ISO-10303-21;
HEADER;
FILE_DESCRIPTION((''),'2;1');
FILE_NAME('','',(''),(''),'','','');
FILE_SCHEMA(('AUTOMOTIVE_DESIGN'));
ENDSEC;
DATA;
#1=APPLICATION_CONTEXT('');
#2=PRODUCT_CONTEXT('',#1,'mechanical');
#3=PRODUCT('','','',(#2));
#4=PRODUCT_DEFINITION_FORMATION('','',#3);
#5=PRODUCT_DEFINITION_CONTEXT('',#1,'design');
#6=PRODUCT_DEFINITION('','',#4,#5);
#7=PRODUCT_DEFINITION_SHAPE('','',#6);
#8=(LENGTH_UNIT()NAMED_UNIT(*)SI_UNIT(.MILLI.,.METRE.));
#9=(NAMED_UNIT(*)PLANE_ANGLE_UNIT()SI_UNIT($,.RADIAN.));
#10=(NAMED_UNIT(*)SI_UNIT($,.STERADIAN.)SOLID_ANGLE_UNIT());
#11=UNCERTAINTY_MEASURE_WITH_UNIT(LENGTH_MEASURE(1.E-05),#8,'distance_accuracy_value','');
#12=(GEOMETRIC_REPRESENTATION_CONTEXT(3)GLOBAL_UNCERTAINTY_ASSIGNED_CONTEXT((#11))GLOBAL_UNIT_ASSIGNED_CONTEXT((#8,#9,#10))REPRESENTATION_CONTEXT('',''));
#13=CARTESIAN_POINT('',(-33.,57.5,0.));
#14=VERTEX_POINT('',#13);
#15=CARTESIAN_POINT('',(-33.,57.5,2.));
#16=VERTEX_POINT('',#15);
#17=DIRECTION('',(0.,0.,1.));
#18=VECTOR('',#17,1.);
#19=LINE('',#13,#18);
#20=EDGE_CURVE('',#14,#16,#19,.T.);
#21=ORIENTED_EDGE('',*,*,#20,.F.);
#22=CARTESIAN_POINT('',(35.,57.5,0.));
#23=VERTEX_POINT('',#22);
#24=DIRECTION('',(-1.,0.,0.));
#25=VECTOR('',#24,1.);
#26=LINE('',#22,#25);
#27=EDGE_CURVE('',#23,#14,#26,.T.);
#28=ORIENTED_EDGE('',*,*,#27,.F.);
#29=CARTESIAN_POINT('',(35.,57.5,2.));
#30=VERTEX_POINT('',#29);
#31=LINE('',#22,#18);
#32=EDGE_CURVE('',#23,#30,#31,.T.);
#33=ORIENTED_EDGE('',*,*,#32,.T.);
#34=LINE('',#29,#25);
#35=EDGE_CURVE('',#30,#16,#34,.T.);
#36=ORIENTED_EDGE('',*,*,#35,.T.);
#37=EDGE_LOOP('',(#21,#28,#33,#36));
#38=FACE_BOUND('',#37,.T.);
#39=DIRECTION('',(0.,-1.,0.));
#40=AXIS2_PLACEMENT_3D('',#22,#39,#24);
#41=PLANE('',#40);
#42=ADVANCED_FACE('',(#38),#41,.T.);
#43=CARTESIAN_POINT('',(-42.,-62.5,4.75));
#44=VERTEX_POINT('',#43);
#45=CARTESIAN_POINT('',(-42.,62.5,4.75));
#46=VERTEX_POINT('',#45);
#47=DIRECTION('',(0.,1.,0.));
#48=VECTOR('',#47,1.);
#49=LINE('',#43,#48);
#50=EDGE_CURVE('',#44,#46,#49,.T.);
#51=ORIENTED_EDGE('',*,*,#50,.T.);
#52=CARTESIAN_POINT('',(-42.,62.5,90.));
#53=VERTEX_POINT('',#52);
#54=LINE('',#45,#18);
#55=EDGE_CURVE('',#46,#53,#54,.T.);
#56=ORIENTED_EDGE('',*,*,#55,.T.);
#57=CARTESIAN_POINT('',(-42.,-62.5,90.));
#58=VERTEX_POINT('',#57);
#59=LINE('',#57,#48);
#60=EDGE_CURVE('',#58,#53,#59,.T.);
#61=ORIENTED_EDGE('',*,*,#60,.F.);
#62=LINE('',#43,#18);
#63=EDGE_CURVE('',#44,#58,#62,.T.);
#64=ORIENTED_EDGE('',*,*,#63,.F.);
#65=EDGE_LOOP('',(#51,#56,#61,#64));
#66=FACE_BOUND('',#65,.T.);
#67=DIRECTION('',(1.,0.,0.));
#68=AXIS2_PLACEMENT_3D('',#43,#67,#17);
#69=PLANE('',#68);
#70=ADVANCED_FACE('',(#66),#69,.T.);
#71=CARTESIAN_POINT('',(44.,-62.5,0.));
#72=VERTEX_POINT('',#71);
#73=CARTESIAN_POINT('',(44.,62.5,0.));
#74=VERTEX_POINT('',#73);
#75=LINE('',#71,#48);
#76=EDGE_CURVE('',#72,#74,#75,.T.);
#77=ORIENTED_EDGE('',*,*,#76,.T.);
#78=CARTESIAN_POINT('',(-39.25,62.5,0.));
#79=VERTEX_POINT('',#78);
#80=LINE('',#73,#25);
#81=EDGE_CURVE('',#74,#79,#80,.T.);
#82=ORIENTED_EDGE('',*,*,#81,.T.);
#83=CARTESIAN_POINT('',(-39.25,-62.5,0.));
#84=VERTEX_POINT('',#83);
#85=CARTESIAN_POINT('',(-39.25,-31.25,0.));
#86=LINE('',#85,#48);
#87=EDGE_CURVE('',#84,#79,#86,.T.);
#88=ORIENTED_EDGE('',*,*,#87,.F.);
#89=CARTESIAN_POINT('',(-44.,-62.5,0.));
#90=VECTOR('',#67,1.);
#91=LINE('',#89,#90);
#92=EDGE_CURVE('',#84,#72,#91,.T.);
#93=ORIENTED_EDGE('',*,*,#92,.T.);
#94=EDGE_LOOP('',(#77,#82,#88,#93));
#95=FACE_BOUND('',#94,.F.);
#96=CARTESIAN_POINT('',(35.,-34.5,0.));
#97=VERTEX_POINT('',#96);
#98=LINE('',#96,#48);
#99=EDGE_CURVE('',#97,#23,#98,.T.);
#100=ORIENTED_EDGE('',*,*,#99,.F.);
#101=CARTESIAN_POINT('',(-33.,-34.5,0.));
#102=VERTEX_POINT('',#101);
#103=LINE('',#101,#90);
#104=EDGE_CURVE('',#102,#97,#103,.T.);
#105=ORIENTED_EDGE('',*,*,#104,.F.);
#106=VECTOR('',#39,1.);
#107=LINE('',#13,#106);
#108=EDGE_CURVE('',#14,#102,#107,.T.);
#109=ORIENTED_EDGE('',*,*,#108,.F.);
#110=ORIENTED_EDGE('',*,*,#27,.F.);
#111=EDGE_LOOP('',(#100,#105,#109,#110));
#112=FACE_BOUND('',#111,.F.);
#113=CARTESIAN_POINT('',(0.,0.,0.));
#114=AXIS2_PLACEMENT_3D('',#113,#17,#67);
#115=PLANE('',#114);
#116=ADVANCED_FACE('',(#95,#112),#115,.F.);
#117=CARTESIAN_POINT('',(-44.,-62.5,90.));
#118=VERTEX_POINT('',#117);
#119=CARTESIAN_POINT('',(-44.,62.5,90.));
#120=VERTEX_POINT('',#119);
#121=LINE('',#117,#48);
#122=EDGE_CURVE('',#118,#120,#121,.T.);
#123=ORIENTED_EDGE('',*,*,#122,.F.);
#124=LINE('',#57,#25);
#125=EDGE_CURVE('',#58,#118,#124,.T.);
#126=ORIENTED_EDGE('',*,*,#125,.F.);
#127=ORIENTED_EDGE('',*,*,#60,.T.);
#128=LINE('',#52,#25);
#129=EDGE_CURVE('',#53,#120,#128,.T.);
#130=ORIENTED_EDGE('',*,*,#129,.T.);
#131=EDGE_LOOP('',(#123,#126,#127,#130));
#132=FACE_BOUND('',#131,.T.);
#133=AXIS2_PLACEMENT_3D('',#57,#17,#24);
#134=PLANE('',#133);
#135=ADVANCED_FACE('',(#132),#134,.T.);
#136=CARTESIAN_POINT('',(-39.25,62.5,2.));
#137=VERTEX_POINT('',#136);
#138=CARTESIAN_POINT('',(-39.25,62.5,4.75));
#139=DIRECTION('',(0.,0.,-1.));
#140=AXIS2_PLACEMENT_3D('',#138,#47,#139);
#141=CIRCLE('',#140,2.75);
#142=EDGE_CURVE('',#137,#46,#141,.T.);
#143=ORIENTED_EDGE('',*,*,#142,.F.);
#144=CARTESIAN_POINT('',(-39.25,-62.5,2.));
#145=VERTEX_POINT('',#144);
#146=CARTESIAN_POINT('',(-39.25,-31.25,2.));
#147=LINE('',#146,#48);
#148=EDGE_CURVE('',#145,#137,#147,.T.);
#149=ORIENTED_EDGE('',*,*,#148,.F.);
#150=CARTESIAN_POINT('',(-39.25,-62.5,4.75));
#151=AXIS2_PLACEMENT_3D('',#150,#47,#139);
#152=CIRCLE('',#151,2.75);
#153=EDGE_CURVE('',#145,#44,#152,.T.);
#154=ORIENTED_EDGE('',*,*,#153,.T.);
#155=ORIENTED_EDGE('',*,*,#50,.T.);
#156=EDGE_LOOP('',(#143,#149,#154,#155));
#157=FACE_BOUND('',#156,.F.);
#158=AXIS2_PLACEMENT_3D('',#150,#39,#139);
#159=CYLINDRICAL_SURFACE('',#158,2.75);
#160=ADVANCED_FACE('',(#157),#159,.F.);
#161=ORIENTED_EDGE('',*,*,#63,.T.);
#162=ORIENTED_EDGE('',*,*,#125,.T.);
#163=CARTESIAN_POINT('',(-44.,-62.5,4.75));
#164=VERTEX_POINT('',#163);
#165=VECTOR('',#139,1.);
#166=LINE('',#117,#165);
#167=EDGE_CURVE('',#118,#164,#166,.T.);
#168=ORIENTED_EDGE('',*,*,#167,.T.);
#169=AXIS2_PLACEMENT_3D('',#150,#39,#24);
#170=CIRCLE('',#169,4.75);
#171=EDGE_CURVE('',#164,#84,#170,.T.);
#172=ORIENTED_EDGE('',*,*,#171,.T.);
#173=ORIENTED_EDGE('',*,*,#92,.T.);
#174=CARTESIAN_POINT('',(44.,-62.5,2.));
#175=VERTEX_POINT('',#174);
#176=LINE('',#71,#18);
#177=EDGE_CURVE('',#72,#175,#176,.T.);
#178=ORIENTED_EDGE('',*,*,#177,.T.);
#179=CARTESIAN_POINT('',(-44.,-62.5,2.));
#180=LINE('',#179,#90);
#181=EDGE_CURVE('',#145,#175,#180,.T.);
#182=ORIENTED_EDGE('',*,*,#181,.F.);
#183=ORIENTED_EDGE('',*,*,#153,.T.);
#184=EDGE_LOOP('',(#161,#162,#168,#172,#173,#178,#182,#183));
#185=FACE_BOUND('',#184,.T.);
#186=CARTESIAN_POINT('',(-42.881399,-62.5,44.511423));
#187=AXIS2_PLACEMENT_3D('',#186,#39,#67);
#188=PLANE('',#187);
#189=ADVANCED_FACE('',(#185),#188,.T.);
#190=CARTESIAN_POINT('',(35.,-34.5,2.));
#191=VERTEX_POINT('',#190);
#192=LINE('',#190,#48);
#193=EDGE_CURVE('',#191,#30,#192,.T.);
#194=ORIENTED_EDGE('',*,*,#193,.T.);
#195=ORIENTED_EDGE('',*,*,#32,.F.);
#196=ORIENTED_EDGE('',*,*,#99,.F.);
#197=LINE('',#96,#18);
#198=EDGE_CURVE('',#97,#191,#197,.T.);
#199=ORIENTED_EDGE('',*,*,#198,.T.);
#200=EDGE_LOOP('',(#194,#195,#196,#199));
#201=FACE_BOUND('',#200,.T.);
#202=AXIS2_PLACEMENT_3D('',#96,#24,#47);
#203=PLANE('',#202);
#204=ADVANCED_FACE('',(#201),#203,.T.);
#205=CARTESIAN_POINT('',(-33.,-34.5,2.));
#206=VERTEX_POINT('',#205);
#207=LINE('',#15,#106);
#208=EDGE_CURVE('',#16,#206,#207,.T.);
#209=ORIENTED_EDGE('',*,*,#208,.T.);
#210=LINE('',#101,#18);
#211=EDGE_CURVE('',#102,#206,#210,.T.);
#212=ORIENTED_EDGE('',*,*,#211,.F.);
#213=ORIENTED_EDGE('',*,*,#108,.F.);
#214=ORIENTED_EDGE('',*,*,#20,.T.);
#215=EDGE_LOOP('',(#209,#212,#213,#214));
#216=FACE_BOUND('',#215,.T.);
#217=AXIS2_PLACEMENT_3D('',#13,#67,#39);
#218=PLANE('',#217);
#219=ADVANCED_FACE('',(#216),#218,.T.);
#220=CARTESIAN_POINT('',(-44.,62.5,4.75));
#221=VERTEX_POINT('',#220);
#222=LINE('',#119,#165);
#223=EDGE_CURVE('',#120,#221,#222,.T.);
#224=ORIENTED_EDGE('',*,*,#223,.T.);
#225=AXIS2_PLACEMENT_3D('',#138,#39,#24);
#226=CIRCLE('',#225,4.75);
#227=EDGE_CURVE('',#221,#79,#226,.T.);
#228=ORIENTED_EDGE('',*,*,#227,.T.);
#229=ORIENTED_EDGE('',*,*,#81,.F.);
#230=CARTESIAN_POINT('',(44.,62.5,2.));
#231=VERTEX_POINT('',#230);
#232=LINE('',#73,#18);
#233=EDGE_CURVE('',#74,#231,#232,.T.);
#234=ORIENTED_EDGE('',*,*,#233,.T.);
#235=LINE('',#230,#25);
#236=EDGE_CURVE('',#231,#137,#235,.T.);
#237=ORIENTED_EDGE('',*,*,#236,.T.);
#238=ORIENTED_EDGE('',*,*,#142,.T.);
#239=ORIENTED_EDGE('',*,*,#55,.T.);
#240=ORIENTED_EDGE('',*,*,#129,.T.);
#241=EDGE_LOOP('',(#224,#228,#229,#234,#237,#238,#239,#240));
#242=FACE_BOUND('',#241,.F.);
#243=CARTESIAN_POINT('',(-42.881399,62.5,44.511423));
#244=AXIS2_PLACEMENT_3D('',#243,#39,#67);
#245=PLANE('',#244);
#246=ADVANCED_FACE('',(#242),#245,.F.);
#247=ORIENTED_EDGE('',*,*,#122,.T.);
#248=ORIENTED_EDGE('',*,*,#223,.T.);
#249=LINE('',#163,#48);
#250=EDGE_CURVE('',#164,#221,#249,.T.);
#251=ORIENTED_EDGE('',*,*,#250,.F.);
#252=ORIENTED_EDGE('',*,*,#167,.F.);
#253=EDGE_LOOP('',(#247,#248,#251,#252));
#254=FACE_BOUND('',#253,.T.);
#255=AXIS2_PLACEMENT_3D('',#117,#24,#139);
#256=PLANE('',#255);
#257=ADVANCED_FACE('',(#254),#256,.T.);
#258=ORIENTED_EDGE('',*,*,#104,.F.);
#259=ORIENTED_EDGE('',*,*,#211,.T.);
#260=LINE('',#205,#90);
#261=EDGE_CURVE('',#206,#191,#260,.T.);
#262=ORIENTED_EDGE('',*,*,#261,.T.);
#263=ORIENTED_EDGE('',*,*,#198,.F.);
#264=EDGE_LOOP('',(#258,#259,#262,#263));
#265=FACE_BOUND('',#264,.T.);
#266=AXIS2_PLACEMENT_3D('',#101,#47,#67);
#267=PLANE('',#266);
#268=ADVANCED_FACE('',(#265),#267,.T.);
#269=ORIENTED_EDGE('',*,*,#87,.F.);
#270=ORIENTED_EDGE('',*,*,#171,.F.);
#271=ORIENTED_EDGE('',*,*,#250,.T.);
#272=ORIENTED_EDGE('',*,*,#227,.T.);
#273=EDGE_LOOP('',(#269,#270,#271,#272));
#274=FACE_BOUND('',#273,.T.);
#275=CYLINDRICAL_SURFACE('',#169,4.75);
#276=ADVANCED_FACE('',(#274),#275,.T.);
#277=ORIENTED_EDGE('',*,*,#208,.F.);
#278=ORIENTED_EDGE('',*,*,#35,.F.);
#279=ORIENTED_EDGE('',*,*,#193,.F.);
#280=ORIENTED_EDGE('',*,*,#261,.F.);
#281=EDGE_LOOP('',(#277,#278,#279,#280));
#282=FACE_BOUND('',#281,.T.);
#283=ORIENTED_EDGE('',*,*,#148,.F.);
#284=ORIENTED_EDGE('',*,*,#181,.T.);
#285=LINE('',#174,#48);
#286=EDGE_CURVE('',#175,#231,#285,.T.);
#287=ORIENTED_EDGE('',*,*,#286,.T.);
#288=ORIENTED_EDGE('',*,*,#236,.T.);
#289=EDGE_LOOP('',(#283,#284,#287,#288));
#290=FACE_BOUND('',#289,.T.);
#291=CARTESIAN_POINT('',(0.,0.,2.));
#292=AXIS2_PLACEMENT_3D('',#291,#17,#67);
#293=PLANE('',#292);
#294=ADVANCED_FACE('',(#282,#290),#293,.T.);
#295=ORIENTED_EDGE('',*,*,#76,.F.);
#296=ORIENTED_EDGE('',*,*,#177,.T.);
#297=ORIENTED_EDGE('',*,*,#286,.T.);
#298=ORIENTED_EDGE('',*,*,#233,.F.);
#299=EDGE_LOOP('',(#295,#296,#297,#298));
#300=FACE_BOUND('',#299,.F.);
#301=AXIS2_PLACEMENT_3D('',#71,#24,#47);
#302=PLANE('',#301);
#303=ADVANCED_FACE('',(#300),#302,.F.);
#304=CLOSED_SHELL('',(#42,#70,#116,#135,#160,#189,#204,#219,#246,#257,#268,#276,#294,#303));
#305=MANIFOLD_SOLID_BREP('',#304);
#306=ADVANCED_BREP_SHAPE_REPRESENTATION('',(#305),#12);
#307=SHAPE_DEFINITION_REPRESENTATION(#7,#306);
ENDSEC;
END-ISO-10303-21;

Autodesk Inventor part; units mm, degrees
ref_plane "YZ Plane" through (0, 0, 0) normal (1, 0, 0) x (0, 1, 0)
ref_plane "XZ Plane" through (0, 0, 0) normal (0, 1, 0) x (-1, 0, 0)
ref_plane "XY Plane" through (0, 0, 0) normal (0, 0, 1) x (1, 0, 0)
sketch "Sketch1" plane through (0, 0, 0) normal (0, 0, 1) x (1, 0, 0)
  line L0 (-44, -62.5) -> (44, -62.5)
  line L1 (44, -62.5) -> (44, 62.5)
  line L2 (44, 62.5) -> (-44, 62.5)
  line L3 (-44, 62.5) -> (-44, -62.5)
  line L4 (-44, -62.5) -> (44, 62.5) construction
  line L5 (44, -62.5) -> (-44, 62.5) construction
  line L6 (35, 57.5) -> (-33, 57.5)
  line L7 (-33, 57.5) -> (-33, -34.5)
  line L8 (-33, -34.5) -> (35, -34.5)
  line L9 (35, -34.5) -> (35, 57.5)
  point P0 (0, 0)
  dimension "d154" = 88
  dimension "d155" = 125
  dimension "d185" = 68
  dimension "d186" = 92
  dimension "d187" = 11
  dimension "d188" = 9
  dimension "d190" = 5
extrude "Plate5" add sketch "Sketch1" along normal blind 2
sketch "Sketch7" plane through (-42, -62.5, 0) normal (-1, 0, 0) x (0, -1, 0)
  line L0 (-125, 0) -> (0, 0)
  line L1 (0, 0) -> (0, 90)
  line L2 (0, 90) -> (-125, 90)
  line L3 (-125, 90) -> (-125, 0)
edge flange "Flange3" height 90 angle 90 thickness 2 bend radius 2.75 thickness toward (-1, 0, 0) relief round relief width 2 relief depth 1 edges at (-44, 0, 2) wall of the first edge with corners at (-42, 62.5, 0) (-42, -62.5, 0) (-42, -62.5, 90) (-42, 62.5, 90)
bend "Bend3"
corner "Corner3"
sketch "Sketch9" plane through (-44, -62.5, 90) normal (-1, 0, 0) x (0, 0, 1)
  line L0 (-27.375, 69.75) -> (-57.875, 69.75)
  line L1 (-57.875, 69.75) -> (-57.875, 100.25)
  line L2 (-57.875, 100.25) -> (-27.375, 100.25)
  line L3 (-27.375, 100.25) -> (-27.375, 69.75)
  line L4 (-27.375, 69.75) -> (-57.875, 100.25) construction
  line L5 (-57.875, 69.75) -> (-27.375, 100.25) construction
  circle A0 centre (-19.625, 62) radius 2.5
  circle A1 centre (-65.625, 62) radius 2.5
  circle A2 centre (-65.625, 108) radius 2.5
  circle A3 centre (-19.625, 108) radius 2.5
  circle A4 centre (-42.625, 85) radius 32.5269 construction
  line L6 (-57.875, 69.75) -> (-65.625, 62) construction
  line L7 (-17.125, 59.5) -> (-68.125, 59.5) construction
  line L8 (-68.125, 59.5) -> (-68.125, 110.5) construction
  line L9 (-68.125, 110.5) -> (-17.125, 110.5) construction
  line L10 (-17.125, 110.5) -> (-17.125, 59.5) construction
  line L11 (-17.125, 59.5) -> (-68.125, 110.5) construction
  line L12 (-68.125, 59.5) -> (-17.125, 110.5) construction
  line L13 (-85.25, 125) -> (0, 125) projected
  line L14 (-42.625, 125) -> (-42.625, 85) construction
  circle A5 centre (-65.625, 108) radius 10.9602 construction
  line L15 (-19.625, 62) -> (-65.625, 62) construction
  line L16 (-65.625, 62) -> (-65.625, 108) construction
  line L17 (-65.625, 108) -> (-19.625, 108) construction
  line L18 (-19.625, 108) -> (-19.625, 62) construction
  line L19 (-19.625, 62) -> (-65.625, 108) construction
  line L20 (-65.625, 62) -> (-19.625, 108) construction
  point P0 (-90, 62.5)
  point P1 (-104.8197, 150.8767)
  point P2 (-104.8197, 150.8767)
  dimension "d181" = 21.9203
  dimension "d174" = 30.5
  dimension "d175" = 30.5
  dimension "d176" = 5
  dimension "d179" = 40
  dimension "d180" = 51
  dimension "d184" = 46
cut "Cut2" [suppressed]
properties part number "PRS 1652 DrSysB Central tube wall_1200" material "Stainless Steel"
